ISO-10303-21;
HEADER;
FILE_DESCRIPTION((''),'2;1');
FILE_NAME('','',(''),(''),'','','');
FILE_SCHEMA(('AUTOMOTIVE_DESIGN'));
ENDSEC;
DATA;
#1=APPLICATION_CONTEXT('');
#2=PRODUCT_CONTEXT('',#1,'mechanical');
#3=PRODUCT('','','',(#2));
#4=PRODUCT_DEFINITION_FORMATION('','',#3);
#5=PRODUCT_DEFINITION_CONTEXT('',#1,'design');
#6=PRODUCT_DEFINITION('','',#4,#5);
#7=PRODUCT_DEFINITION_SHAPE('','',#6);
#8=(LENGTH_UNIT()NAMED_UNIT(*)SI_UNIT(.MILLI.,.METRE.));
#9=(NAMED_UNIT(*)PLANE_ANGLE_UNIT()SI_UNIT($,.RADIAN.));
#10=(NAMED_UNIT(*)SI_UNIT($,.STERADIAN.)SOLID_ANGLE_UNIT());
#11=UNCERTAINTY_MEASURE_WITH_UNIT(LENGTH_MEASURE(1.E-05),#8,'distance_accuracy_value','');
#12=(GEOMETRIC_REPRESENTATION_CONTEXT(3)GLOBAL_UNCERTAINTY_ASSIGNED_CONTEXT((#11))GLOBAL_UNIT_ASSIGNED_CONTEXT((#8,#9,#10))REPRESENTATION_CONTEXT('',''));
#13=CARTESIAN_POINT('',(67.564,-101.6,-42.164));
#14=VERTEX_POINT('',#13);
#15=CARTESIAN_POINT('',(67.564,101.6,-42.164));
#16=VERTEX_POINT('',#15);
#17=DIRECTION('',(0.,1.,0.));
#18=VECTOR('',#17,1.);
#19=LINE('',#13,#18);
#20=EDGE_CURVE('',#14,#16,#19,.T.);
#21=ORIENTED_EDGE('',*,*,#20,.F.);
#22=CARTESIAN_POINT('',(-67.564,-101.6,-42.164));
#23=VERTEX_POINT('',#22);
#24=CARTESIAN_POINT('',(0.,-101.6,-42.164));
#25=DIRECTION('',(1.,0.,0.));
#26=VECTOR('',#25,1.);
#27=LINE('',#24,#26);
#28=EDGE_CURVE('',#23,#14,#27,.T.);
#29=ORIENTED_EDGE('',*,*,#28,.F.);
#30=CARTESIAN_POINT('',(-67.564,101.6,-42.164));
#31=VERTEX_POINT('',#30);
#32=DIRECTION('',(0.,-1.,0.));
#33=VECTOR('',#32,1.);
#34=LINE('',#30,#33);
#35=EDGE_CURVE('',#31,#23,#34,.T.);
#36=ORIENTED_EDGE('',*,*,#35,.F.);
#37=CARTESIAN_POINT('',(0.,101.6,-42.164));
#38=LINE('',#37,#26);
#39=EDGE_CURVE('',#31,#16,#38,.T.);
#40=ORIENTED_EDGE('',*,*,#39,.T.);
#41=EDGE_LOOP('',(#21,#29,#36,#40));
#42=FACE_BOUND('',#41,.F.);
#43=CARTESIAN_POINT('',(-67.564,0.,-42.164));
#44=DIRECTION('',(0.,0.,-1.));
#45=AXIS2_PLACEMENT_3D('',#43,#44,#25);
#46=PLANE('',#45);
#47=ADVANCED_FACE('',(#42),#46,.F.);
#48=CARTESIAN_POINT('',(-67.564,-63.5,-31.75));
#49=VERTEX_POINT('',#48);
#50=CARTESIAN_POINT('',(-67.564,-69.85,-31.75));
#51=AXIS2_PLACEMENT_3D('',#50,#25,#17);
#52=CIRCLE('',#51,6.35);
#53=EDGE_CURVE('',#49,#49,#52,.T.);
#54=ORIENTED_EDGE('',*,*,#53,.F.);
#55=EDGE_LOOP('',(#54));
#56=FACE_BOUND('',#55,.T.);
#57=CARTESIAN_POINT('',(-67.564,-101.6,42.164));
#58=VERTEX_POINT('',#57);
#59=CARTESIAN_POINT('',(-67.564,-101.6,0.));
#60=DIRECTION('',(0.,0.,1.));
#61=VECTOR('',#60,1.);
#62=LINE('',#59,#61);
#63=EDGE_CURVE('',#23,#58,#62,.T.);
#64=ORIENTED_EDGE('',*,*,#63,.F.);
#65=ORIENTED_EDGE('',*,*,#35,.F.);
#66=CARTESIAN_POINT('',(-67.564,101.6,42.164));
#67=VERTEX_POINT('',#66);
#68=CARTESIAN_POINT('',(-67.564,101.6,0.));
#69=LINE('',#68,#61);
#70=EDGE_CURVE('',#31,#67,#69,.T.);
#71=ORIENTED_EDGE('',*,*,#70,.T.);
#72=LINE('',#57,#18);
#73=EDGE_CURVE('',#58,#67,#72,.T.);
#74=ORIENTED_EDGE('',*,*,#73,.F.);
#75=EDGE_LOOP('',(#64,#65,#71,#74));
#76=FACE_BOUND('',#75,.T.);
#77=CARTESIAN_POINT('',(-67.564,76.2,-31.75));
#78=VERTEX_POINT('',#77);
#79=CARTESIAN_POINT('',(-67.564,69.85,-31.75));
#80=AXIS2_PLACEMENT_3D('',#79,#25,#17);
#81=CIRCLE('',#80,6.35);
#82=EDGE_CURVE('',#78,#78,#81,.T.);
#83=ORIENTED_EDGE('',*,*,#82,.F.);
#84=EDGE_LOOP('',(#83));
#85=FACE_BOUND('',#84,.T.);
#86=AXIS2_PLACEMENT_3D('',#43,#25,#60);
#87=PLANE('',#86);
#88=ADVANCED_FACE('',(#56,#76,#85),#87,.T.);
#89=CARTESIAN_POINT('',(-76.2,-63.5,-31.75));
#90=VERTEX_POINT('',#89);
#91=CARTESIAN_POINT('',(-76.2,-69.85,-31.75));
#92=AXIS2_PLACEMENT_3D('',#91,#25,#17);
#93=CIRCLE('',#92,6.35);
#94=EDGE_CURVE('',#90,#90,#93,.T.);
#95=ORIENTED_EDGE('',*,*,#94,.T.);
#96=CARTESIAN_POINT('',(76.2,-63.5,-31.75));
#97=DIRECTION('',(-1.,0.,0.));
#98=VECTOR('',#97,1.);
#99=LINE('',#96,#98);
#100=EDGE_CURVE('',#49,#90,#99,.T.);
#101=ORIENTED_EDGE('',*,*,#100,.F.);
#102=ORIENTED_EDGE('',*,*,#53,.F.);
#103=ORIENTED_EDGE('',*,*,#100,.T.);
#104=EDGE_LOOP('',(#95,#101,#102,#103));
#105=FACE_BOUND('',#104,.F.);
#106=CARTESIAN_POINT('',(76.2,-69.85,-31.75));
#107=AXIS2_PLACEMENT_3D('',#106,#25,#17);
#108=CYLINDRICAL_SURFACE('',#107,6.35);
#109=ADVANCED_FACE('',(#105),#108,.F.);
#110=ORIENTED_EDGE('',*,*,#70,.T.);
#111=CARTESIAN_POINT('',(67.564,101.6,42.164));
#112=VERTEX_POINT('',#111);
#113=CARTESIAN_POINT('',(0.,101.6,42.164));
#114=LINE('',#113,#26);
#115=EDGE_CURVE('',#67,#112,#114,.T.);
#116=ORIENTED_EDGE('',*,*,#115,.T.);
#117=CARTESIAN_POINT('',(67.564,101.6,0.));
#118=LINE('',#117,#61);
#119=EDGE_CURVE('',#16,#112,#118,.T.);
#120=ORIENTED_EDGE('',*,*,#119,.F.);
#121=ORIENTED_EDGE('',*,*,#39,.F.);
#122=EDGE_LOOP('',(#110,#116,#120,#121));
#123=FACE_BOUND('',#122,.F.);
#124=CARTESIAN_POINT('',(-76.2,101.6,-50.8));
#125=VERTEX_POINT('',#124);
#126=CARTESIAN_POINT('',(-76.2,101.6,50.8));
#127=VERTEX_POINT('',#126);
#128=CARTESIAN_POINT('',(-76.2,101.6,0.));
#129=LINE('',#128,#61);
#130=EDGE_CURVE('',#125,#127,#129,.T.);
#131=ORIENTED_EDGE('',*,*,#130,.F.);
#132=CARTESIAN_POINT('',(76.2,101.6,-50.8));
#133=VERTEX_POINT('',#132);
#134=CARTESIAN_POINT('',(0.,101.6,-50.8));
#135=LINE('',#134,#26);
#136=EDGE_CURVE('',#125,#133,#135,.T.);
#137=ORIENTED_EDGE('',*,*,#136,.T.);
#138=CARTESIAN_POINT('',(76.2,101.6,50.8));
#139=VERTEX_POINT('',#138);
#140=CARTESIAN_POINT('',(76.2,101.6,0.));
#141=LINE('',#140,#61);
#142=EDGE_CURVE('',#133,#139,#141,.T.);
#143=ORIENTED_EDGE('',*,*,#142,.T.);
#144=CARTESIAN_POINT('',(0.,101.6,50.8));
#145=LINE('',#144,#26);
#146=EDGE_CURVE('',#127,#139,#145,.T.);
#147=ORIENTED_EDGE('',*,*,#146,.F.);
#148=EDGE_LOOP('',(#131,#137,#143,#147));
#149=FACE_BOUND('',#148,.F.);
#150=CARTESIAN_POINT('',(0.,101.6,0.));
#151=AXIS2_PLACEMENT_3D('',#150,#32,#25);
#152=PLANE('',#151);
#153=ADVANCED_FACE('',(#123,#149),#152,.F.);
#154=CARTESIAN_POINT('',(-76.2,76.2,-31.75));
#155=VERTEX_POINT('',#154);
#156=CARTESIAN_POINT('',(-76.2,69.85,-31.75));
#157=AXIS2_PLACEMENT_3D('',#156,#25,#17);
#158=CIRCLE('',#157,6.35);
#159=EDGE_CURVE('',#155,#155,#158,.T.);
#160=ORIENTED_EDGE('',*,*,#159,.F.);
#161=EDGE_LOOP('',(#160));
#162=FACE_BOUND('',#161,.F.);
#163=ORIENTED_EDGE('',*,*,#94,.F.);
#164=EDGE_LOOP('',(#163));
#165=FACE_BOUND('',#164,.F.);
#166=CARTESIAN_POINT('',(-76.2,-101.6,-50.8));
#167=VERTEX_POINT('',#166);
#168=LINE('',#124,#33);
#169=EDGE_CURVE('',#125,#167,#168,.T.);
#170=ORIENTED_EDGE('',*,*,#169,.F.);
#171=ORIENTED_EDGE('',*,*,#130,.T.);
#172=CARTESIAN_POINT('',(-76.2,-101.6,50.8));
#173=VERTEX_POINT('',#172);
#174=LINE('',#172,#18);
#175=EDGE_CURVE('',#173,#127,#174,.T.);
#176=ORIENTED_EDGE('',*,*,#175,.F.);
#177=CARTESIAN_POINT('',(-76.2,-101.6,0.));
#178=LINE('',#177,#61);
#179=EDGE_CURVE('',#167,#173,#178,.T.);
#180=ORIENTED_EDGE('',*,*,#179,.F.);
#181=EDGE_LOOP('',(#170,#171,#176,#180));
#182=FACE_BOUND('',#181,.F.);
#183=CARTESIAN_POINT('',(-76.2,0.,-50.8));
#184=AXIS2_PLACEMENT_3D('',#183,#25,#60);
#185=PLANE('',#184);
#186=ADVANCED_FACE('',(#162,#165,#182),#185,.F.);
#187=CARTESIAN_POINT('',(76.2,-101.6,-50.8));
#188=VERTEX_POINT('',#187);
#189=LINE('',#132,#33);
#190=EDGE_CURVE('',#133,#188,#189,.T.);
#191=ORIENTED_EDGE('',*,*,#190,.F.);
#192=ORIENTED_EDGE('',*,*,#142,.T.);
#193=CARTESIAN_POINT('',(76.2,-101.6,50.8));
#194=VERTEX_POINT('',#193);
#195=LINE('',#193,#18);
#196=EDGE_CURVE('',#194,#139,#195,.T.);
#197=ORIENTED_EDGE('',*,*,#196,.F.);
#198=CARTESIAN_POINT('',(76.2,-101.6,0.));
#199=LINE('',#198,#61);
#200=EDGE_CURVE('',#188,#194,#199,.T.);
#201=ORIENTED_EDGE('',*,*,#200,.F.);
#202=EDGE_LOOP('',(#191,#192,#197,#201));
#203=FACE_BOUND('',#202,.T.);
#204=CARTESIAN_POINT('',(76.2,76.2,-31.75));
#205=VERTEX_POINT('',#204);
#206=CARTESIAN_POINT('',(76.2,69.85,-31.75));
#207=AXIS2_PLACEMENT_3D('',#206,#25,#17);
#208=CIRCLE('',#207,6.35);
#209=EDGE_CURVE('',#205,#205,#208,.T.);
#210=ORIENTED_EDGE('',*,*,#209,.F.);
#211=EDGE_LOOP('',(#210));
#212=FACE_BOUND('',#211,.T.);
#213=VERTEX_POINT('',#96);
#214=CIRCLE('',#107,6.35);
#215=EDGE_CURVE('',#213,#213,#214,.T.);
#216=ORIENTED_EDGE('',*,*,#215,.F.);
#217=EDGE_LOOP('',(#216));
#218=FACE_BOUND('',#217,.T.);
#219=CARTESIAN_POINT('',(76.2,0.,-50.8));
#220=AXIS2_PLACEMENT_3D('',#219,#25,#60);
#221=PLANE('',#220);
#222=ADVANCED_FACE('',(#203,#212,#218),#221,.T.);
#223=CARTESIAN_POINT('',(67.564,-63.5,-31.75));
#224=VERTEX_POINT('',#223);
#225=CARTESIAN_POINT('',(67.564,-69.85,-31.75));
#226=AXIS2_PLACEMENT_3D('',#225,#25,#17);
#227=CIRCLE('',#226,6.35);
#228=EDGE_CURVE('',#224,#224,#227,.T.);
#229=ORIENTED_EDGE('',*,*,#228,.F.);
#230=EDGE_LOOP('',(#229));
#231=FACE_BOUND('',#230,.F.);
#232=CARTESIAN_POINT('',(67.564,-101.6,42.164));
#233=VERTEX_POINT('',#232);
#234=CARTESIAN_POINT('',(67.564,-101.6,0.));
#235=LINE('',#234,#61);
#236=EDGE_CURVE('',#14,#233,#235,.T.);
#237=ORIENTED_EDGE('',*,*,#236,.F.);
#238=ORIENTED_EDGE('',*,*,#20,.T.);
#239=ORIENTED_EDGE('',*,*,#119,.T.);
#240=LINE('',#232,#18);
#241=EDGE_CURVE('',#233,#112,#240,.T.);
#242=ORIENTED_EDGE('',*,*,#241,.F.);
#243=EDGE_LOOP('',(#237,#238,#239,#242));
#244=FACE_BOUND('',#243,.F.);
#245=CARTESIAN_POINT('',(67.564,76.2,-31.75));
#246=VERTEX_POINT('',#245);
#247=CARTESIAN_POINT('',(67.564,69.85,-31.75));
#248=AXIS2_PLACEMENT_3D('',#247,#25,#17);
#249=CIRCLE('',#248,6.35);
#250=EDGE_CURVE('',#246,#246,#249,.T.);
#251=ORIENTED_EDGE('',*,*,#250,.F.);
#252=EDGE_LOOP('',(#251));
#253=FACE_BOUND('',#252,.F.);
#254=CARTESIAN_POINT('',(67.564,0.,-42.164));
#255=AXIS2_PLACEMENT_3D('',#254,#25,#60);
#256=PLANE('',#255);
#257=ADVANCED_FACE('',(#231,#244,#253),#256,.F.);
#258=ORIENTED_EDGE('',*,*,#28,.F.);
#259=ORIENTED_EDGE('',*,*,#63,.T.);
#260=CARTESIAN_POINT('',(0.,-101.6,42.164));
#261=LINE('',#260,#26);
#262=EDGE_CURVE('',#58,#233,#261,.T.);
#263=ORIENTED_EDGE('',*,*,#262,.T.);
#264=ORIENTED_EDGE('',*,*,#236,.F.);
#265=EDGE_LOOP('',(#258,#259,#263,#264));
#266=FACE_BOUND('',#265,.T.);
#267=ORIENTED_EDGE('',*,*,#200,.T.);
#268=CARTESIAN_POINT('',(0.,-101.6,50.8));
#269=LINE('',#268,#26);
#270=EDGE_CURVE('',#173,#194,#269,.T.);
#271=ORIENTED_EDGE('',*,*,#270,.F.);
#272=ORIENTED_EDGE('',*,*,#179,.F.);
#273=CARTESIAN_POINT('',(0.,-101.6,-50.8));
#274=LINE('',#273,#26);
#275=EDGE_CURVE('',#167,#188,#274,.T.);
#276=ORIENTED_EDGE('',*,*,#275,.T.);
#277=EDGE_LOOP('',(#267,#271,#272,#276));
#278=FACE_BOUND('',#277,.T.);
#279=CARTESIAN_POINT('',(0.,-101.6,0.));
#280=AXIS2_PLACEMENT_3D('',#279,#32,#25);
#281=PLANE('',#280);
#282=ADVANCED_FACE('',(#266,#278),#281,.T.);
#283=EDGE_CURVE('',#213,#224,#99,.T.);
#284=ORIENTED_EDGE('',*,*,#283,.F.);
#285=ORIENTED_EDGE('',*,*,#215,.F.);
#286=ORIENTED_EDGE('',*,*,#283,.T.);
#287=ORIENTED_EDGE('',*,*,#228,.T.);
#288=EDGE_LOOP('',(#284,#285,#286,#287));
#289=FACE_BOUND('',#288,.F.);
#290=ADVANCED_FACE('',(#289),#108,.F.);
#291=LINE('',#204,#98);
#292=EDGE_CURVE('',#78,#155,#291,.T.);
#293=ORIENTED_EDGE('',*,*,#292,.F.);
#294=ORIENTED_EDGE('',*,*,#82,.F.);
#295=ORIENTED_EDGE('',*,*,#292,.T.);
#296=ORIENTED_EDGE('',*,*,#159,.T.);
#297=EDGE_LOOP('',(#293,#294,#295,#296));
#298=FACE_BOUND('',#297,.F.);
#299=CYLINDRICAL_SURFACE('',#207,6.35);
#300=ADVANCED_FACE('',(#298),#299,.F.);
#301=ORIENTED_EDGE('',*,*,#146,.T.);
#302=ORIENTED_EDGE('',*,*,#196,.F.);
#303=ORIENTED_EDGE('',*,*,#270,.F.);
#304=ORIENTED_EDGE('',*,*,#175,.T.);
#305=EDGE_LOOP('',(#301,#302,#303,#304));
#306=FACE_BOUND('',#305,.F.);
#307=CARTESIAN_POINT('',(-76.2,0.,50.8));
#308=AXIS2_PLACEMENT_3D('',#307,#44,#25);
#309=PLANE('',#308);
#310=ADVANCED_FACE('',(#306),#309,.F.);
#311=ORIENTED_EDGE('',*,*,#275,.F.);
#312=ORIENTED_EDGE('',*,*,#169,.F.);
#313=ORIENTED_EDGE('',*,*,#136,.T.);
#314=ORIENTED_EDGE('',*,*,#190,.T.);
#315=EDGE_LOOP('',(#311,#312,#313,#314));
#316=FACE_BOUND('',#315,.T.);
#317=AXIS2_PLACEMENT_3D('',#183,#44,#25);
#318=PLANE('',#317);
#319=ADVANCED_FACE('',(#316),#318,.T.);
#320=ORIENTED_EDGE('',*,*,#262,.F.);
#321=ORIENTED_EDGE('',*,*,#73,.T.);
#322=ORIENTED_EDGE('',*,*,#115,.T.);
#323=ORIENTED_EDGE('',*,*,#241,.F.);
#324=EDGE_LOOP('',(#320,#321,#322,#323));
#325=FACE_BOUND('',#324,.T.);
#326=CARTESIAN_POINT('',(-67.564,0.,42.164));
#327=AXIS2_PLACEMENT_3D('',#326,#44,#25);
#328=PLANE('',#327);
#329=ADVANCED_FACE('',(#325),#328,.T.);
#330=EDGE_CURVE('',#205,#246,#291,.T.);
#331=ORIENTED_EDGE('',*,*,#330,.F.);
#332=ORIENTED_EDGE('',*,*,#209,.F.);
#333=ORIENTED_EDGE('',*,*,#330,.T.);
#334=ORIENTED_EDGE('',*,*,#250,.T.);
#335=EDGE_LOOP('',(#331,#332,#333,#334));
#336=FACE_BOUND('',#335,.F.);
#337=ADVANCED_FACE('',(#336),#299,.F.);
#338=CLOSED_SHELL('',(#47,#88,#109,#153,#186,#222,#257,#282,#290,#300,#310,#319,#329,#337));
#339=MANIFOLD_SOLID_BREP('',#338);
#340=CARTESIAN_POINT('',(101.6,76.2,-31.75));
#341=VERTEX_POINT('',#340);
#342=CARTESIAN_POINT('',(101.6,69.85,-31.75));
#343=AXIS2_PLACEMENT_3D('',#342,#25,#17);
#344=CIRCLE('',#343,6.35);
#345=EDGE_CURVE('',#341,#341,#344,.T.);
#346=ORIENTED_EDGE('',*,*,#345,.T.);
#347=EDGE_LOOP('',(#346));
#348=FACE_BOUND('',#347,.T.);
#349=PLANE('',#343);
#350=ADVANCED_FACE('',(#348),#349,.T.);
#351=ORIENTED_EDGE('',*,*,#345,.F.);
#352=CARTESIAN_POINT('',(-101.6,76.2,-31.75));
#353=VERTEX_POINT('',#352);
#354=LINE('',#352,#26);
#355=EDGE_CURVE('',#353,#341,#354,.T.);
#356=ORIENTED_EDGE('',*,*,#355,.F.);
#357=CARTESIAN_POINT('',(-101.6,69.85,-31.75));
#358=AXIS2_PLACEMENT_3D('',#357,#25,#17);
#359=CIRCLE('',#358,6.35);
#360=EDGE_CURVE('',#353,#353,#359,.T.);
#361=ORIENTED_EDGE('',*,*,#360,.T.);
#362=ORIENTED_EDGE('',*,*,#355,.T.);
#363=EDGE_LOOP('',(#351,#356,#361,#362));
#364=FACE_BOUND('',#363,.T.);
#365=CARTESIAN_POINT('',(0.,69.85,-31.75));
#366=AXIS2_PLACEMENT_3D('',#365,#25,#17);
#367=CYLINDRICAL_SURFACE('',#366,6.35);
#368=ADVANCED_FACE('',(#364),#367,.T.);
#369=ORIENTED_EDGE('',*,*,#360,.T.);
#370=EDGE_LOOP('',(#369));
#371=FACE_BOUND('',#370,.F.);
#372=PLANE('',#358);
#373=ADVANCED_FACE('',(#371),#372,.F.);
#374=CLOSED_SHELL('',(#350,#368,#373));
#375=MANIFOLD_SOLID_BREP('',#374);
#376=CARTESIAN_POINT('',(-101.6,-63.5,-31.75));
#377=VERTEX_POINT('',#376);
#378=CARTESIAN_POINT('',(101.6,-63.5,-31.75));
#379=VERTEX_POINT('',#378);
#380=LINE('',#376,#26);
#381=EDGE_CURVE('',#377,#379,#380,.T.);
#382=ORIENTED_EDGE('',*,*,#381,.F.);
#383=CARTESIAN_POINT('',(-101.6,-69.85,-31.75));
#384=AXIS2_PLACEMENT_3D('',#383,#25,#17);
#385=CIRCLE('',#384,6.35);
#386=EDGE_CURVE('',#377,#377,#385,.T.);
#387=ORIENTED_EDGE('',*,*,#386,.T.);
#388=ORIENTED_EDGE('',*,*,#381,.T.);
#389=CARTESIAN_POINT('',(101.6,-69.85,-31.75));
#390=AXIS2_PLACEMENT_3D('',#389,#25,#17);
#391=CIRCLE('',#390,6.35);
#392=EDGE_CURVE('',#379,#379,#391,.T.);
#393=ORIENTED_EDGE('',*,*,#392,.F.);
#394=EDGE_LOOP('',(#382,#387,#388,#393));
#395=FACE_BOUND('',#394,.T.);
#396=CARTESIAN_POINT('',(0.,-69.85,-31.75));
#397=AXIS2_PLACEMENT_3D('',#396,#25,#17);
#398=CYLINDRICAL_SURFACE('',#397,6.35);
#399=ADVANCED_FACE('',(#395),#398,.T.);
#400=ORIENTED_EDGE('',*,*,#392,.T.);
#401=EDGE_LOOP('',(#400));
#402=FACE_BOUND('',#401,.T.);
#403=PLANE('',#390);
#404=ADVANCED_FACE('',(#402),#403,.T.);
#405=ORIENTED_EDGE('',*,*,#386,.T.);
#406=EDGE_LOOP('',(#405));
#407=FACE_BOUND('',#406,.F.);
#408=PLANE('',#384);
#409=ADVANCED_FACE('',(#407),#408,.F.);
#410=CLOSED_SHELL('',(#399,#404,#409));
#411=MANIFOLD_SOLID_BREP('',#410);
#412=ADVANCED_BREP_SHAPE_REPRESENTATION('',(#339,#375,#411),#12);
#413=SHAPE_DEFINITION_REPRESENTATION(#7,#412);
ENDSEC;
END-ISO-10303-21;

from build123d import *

# Parameters (mm, degrees)
F0_W     = 152.4
F0_H     = 101.6
F0_W_2   = 135.128
F0_H_2   = 84.328
F1_DEPTH = 101.6
F2_R     = 6.35
F3_DEPTH = 152.401
F4_R     = 6.35
F5_DEPTH = 101.6


with BuildPart() as f1:
    # F0 (on Front) → F1 (new body, symmetric)
    with BuildSketch(Plane.XZ):
        Rectangle(F0_W, F0_H)
        Rectangle(F0_W_2, F0_H_2, mode=Mode.SUBTRACT)
    extrude(amount=F1_DEPTH, both=True)

    # F2 (on face) → F3 (cut, through all)
    with BuildSketch(Plane.YZ.offset(76.2)):
        with Locations((-69.85, -31.75)):
            Circle(F2_R)
        with Locations((69.85, -31.75)):
            Circle(F2_R)
    extrude(amount=-F3_DEPTH, mode=Mode.SUBTRACT)


with BuildPart() as f5:
    # F4 (on Right) → F5 (new body, symmetric)
    with BuildSketch(Plane.YZ):
        with Locations((-69.85, -31.75)):
            Circle(F4_R)
    extrude(amount=F5_DEPTH, both=True)


with BuildPart() as f5b:
    # F4 (on Right) → F5, piece 2 (new body, symmetric)
    with BuildSketch(Plane.YZ):
        with Locations((69.85, -31.75)):
            Circle(F4_R)
    extrude(amount=F5_DEPTH, both=True)


solid = Compound([f1.part, f5.part, f5b.part])
